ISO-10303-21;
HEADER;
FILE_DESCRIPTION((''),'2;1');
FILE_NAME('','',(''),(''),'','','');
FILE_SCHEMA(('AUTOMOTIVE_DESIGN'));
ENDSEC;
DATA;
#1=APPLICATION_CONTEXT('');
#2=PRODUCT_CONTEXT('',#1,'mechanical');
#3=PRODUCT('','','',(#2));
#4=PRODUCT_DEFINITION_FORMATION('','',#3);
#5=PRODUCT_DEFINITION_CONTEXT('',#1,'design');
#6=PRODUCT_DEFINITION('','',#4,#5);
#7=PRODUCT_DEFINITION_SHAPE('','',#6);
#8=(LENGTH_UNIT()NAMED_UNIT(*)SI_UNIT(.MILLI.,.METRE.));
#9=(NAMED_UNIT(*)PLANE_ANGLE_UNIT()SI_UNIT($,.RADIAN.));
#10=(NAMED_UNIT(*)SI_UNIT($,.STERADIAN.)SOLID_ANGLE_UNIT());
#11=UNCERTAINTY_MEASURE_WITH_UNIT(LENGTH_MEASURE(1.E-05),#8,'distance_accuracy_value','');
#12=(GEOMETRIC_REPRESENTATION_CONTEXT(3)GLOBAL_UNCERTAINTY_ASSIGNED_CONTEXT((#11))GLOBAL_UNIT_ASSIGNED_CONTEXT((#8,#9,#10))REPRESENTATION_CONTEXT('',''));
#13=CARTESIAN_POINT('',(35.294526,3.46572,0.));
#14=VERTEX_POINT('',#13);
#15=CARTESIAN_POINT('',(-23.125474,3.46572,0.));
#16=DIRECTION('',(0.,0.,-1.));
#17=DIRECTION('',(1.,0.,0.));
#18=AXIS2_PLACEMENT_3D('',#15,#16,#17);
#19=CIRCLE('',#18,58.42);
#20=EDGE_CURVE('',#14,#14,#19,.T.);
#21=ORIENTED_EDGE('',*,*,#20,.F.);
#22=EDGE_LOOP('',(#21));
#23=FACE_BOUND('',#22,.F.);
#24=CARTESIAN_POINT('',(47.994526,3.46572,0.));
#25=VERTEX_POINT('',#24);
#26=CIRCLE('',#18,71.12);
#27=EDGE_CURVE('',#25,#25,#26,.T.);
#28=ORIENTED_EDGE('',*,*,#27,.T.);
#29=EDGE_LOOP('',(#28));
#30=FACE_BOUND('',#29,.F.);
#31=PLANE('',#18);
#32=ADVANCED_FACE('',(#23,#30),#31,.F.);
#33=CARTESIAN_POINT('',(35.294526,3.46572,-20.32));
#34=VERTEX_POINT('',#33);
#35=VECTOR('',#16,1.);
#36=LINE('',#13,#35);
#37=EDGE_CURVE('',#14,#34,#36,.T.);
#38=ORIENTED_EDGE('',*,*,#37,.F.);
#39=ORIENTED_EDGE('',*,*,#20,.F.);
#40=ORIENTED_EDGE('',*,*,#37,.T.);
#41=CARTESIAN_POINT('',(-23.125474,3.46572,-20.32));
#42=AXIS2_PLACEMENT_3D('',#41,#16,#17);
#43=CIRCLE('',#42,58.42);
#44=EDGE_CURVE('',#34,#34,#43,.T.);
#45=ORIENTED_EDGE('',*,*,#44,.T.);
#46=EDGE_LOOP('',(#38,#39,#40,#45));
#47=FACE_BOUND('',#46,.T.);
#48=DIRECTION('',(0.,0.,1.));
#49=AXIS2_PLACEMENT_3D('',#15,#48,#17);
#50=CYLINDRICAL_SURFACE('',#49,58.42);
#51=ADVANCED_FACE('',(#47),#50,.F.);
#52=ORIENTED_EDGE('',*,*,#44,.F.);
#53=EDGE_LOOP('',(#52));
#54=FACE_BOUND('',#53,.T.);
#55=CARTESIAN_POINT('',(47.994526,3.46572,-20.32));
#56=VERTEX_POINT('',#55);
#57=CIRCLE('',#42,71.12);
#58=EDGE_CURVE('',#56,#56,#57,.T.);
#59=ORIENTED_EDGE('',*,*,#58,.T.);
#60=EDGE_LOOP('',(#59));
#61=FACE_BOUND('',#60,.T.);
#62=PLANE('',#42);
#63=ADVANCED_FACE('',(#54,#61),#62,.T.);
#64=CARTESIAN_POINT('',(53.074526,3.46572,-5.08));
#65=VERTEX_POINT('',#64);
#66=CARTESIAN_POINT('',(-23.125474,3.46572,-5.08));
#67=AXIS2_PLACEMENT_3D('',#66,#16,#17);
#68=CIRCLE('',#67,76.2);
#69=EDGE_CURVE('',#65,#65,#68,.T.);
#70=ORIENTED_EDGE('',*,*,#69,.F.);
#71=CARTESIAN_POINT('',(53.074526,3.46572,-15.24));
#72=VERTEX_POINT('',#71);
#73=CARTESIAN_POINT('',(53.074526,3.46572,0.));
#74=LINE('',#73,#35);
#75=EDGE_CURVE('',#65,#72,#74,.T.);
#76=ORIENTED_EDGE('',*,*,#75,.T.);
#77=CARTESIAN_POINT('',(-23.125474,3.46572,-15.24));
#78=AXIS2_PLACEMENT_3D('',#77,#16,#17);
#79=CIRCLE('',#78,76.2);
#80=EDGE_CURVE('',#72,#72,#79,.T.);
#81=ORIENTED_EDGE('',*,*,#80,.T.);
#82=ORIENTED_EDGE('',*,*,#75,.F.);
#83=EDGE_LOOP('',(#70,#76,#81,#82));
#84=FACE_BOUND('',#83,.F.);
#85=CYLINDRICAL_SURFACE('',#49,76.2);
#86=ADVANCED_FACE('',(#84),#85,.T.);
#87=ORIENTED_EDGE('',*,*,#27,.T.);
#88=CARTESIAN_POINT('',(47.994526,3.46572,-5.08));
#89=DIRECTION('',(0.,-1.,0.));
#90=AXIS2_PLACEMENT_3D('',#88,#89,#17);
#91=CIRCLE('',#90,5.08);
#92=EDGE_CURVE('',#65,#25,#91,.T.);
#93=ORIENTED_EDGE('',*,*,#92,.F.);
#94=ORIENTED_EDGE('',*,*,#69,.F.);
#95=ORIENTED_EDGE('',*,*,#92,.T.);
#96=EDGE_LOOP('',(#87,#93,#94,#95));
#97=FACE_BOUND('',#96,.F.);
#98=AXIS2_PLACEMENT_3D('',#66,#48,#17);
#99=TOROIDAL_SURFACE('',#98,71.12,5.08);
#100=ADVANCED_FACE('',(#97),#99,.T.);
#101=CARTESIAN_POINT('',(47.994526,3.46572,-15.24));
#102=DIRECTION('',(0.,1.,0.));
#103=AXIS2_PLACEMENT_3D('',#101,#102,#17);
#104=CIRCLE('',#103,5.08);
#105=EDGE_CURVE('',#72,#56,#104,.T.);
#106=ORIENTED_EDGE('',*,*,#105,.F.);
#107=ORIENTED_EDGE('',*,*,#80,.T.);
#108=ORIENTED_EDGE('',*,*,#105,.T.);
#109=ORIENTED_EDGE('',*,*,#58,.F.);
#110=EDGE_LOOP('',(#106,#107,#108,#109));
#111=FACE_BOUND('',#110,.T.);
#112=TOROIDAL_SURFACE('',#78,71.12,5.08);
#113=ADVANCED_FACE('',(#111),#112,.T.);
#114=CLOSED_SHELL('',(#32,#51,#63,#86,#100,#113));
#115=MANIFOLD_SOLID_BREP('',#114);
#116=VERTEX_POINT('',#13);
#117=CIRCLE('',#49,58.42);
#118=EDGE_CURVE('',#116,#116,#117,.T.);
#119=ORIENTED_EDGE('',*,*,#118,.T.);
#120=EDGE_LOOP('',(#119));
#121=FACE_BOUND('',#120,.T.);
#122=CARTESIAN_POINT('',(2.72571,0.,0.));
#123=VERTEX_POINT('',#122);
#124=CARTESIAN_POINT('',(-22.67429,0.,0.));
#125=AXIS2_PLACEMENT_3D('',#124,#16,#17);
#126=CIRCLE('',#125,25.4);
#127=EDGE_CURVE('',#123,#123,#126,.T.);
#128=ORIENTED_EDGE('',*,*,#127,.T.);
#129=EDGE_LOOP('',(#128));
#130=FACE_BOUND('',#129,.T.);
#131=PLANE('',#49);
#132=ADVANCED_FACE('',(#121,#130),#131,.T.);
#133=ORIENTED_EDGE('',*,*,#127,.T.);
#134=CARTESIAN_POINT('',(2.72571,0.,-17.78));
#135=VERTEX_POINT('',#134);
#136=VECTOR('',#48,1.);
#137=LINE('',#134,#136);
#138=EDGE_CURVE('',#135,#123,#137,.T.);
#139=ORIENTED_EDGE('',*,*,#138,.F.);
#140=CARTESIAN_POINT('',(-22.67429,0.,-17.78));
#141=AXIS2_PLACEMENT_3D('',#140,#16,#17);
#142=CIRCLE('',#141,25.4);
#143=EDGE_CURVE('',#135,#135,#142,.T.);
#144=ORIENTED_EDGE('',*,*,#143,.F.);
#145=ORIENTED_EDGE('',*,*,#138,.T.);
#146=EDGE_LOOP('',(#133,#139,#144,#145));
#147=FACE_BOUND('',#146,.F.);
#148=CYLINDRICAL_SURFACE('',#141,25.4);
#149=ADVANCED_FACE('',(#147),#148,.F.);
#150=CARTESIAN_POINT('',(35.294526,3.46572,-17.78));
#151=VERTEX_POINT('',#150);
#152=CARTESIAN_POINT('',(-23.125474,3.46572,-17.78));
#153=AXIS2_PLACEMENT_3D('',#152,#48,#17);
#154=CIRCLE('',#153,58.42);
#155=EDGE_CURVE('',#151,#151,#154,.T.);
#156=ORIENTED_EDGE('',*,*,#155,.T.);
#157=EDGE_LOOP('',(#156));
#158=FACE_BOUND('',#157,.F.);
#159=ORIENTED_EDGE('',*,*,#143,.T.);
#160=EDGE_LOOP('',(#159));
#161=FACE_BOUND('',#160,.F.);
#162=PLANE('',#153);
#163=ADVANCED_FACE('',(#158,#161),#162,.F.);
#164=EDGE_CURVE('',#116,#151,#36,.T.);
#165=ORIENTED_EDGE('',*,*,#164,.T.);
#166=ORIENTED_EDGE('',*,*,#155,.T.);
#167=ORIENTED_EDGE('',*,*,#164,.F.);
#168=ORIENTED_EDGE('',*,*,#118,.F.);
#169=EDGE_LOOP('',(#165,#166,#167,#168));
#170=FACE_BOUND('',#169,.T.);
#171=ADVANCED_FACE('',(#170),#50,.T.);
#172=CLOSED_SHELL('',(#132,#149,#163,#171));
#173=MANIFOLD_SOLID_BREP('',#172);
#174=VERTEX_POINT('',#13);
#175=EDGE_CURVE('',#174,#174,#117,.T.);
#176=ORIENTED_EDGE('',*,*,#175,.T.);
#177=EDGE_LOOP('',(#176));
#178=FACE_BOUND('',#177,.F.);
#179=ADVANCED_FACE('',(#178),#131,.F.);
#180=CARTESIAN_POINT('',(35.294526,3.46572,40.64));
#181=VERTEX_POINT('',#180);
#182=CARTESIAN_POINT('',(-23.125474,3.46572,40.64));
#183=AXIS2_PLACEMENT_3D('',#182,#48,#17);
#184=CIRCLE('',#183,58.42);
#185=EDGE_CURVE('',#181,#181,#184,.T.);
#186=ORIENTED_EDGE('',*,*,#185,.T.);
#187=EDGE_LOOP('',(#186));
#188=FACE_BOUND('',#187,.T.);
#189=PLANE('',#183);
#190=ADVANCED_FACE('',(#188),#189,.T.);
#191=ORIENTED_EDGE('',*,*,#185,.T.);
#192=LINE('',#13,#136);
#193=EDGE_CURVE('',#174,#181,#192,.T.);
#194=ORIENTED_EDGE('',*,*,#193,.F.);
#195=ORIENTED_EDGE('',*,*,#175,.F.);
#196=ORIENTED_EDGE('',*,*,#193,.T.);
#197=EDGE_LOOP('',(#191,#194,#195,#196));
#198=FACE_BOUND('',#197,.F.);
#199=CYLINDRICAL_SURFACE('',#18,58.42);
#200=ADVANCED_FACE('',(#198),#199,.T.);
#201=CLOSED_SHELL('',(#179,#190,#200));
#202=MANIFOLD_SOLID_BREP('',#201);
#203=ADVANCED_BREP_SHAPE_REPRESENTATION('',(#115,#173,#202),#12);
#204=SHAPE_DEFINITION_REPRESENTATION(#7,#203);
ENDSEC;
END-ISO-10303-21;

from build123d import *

# Parameters (mm, degrees)
F0_R     = 58.42
F1_DEPTH = 40.64
F2_R     = 76.2
F2_R_2   = 58.42
F3_DEPTH = 20.32
F4_R     = 5.08
F5_DEPTH = 17.78
F7_R     = 25.4
F8_DEPTH = 45.974


with BuildPart() as f1:
    # F0 (on Top) → F1 (new body)
    with BuildSketch(Plane.XY):
        with Locations((-23.1254743153, 3.4657202779)):
            Circle(F0_R)
    extrude(amount=F1_DEPTH)


with BuildPart() as f3:
    # F2 (on face) → F3 (new body)
    with BuildSketch(Plane(origin=(0, 0, 0), x_dir=(1, 0, 0), z_dir=(0, 0, -1))):
        with Locations((-23.1254743153, -3.4657202779)):
            Circle(F2_R)
        with Locations((-23.1254743153, -3.4657202779)):
            Circle(F2_R_2, mode=Mode.SUBTRACT)
    extrude(amount=F3_DEPTH)

    # F4
    f4_edges = [f3.edges().sort_by_distance(p)[0] for p in [
        (53.074526, 3.46572, -10.16),
        (-99.325474, 3.46572, 0),
        (-99.325474, 3.46572, -20.32),
    ]]
    fillet(f4_edges, radius=F4_R)


with BuildPart() as f5:
    # F5 (new): a face of the model
    f5_faces = [f1.part.faces().sort_by_distance(p)[0] for p in [
        (-23.1254743153, 3.4657202779, 0),
    ]]
    extrude(f5_faces, amount=F5_DEPTH)

    # F7 (on face) → F8 (cut)
    with BuildSketch(Plane(origin=(0, 0, -17.78), x_dir=(1, 0, 0), z_dir=(0, 0, -1))):
        with Locations((-22.6742904633, 0)):
            Circle(F7_R)
    extrude(amount=-F8_DEPTH, mode=Mode.SUBTRACT)


solid = Compound([f1.part, f3.part, f5.part])
